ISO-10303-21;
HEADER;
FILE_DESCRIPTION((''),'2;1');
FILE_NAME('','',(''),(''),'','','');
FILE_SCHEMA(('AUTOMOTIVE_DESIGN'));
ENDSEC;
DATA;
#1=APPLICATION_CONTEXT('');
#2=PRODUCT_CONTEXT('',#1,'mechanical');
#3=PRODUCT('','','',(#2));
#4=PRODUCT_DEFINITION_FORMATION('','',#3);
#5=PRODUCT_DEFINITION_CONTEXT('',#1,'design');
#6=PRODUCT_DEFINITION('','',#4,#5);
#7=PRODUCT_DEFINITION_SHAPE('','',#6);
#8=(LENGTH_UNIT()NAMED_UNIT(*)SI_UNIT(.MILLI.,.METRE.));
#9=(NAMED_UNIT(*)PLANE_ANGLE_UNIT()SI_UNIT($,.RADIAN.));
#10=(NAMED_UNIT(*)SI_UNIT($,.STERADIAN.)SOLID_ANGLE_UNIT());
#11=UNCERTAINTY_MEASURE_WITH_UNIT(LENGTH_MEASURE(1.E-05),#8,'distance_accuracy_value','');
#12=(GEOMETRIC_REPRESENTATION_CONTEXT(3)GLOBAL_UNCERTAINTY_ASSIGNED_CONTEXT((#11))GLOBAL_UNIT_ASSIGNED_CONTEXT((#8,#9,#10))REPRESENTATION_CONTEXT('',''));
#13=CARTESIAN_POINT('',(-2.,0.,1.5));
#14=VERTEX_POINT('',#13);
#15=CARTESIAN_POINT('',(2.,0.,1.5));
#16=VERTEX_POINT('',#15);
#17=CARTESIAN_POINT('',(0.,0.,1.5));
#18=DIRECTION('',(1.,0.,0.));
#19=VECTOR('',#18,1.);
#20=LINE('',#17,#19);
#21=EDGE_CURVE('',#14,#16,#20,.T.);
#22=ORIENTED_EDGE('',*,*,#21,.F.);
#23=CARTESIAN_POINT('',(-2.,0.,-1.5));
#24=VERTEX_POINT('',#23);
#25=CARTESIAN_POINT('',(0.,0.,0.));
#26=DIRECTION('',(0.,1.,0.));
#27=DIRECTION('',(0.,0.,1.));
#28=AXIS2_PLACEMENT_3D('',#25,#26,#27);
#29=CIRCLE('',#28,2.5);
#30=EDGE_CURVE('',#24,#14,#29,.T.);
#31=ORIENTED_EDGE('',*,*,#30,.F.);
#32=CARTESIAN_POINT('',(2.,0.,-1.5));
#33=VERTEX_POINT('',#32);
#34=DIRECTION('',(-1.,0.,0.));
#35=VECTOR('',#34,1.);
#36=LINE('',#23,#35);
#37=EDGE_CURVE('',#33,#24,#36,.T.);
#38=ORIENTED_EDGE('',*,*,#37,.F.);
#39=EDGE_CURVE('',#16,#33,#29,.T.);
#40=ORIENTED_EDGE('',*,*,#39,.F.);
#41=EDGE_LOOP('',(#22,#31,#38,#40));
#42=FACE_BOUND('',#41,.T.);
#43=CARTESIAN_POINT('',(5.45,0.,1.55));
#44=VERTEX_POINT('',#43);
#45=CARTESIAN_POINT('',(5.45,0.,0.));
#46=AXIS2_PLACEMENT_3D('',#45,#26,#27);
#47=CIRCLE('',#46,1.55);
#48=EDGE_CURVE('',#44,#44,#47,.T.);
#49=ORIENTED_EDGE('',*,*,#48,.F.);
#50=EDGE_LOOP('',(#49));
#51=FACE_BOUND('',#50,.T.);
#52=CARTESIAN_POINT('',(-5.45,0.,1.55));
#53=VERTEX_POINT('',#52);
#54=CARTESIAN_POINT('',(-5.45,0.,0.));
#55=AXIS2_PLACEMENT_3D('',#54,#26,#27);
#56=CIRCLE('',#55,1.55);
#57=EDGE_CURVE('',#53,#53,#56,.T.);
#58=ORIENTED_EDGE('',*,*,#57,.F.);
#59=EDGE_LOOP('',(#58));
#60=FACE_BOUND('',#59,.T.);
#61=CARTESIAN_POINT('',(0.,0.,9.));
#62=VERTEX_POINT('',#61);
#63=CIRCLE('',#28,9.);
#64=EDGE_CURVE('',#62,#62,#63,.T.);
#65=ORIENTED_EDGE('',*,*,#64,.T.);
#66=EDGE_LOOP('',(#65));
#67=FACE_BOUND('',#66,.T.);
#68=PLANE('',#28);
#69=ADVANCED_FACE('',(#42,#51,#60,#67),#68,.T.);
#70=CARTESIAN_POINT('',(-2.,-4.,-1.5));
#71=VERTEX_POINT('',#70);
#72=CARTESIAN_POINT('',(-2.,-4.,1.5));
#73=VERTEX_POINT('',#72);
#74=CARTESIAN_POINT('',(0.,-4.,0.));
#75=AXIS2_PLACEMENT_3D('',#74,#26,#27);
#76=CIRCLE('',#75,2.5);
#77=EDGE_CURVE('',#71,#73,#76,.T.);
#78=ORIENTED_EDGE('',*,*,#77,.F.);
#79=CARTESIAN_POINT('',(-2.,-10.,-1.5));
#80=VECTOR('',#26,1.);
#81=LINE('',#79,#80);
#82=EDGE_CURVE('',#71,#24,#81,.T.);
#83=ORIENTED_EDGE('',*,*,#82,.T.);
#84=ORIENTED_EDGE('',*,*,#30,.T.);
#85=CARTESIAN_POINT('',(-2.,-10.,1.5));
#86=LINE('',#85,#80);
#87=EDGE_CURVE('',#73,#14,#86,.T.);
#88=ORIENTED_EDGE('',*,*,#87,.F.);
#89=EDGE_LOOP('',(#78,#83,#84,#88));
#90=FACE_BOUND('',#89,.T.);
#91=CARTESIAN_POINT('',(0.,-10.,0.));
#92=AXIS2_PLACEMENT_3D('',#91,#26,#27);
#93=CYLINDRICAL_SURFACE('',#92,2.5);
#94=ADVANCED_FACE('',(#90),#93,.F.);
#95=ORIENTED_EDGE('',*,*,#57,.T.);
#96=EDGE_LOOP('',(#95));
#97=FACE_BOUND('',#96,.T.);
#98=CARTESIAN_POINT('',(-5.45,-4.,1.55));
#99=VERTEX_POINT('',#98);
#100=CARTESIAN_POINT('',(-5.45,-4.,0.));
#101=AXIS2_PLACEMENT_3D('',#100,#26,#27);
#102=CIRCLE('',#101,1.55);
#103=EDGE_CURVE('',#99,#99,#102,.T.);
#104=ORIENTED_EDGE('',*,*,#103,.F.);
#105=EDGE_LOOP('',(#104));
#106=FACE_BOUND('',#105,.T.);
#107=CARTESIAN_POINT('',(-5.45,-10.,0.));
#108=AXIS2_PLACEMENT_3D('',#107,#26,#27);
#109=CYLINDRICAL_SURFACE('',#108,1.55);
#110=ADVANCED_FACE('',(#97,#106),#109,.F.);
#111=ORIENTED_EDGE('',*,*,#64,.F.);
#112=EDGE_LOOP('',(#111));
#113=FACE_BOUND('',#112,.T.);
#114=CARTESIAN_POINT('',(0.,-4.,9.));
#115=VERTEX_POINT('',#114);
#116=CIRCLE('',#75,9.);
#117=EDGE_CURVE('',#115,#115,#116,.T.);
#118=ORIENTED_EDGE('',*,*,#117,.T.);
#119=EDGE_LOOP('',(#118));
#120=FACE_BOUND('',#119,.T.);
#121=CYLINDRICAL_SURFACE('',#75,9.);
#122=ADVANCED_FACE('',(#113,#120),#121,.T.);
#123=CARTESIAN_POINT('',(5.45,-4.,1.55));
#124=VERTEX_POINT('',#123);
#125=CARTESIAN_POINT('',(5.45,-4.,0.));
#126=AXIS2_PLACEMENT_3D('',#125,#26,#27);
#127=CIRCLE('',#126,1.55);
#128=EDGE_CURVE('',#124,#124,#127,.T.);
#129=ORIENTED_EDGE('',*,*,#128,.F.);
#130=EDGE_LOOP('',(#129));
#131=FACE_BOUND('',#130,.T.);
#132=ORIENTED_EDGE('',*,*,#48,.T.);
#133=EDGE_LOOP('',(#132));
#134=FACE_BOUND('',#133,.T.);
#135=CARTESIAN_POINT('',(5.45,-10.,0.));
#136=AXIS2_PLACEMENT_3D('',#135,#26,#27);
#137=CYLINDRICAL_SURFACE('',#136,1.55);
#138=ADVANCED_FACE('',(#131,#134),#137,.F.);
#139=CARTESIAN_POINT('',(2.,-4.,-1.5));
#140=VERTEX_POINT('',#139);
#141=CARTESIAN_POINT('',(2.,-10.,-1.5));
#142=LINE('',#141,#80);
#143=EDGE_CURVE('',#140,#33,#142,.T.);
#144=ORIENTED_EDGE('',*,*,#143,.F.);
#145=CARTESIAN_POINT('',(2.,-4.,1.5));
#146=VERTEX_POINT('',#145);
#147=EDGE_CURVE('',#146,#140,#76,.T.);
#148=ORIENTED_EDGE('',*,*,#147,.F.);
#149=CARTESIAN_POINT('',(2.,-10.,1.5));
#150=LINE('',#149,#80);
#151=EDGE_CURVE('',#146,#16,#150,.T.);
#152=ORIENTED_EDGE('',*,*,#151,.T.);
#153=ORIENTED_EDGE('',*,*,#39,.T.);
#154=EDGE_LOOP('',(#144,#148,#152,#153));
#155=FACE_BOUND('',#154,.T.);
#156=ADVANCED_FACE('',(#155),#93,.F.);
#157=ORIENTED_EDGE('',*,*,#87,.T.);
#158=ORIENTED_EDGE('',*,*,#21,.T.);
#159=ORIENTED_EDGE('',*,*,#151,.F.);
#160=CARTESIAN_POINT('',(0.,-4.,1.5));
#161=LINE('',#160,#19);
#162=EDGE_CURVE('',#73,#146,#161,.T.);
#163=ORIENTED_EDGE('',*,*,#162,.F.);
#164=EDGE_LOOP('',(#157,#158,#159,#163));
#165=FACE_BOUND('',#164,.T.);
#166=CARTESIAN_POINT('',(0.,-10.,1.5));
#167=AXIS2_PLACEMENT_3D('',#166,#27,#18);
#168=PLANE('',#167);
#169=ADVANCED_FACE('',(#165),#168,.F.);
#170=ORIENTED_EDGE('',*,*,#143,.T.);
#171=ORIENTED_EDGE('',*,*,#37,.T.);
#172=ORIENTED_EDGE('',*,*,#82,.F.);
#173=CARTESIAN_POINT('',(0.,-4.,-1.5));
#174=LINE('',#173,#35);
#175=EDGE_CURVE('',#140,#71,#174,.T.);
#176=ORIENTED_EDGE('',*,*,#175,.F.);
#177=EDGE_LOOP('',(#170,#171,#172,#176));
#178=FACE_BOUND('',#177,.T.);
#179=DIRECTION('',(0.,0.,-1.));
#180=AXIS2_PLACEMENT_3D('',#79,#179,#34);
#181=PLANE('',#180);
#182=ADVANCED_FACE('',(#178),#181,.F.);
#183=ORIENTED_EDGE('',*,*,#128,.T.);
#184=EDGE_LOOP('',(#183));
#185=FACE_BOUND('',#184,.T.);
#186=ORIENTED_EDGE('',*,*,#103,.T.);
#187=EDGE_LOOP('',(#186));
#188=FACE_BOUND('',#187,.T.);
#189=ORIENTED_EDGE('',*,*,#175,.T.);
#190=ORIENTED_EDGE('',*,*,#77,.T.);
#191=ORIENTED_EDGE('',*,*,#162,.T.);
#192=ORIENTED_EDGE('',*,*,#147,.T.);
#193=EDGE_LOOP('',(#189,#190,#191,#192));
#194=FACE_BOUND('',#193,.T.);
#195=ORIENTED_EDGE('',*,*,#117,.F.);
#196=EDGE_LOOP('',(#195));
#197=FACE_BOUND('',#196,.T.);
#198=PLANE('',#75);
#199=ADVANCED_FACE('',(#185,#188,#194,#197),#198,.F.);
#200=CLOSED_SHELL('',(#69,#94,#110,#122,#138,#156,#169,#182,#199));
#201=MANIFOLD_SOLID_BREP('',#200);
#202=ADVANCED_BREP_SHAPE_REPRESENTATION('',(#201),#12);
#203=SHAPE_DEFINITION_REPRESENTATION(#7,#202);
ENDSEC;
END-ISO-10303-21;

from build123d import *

# Parameters (mm, degrees)
SKETCH1_R          = 9
BASE_FLANGE1_DEPTH = 4
CUT_EXTRUDE1_DEPTH = 10
SKETCH7_R          = 1.55
CUT_EXTRUDE2_DEPTH = 10


# Sheet-metal steps are written as plain solids
with BuildPart() as part:
    # Sketch1 → Base-Flange1 (new body)
    with BuildSketch(Plane(origin=(0, 0, 0), x_dir=(1, 0, 0), z_dir=(0, 1, 0))):
        with Locations(Location((0, 0, 0), (0, 0, 270))):
            Circle(SKETCH1_R)
    extrude(amount=-BASE_FLANGE1_DEPTH)

    # Sketch6 → Cut-Extrude1 (cut)
    with BuildSketch(Plane(origin=(0, 0, 0), x_dir=(1, 0, 0), z_dir=(0, 1, 0))):
        with BuildLine():
            Line((-2, 1.5), (2, 1.5))
            ThreePointArc((2, 1.5), (2.5, 0), (2, -1.5))
            Line((2, -1.5), (0, -1.5))
            Line((0, -1.5), (-2, -1.5))
            ThreePointArc((-2, -1.5), (-2.5, 0), (-2, 1.5))
        make_face()
    extrude(amount=-CUT_EXTRUDE1_DEPTH, mode=Mode.SUBTRACT)

    # Sketch7 → Cut-Extrude2 (cut)
    with BuildSketch(Plane(origin=(0, 0, 0), x_dir=(1, 0, 0), z_dir=(0, 1, 0))):
        with Locations(Location((-5.45, 0, 0), (0, 0, 270))):
            Circle(SKETCH7_R)
        with Locations(Location((5.45, 0, 0), (0, 0, 270))):
            Circle(SKETCH7_R)
    extrude(amount=-CUT_EXTRUDE2_DEPTH, mode=Mode.SUBTRACT)


solid = part.part
